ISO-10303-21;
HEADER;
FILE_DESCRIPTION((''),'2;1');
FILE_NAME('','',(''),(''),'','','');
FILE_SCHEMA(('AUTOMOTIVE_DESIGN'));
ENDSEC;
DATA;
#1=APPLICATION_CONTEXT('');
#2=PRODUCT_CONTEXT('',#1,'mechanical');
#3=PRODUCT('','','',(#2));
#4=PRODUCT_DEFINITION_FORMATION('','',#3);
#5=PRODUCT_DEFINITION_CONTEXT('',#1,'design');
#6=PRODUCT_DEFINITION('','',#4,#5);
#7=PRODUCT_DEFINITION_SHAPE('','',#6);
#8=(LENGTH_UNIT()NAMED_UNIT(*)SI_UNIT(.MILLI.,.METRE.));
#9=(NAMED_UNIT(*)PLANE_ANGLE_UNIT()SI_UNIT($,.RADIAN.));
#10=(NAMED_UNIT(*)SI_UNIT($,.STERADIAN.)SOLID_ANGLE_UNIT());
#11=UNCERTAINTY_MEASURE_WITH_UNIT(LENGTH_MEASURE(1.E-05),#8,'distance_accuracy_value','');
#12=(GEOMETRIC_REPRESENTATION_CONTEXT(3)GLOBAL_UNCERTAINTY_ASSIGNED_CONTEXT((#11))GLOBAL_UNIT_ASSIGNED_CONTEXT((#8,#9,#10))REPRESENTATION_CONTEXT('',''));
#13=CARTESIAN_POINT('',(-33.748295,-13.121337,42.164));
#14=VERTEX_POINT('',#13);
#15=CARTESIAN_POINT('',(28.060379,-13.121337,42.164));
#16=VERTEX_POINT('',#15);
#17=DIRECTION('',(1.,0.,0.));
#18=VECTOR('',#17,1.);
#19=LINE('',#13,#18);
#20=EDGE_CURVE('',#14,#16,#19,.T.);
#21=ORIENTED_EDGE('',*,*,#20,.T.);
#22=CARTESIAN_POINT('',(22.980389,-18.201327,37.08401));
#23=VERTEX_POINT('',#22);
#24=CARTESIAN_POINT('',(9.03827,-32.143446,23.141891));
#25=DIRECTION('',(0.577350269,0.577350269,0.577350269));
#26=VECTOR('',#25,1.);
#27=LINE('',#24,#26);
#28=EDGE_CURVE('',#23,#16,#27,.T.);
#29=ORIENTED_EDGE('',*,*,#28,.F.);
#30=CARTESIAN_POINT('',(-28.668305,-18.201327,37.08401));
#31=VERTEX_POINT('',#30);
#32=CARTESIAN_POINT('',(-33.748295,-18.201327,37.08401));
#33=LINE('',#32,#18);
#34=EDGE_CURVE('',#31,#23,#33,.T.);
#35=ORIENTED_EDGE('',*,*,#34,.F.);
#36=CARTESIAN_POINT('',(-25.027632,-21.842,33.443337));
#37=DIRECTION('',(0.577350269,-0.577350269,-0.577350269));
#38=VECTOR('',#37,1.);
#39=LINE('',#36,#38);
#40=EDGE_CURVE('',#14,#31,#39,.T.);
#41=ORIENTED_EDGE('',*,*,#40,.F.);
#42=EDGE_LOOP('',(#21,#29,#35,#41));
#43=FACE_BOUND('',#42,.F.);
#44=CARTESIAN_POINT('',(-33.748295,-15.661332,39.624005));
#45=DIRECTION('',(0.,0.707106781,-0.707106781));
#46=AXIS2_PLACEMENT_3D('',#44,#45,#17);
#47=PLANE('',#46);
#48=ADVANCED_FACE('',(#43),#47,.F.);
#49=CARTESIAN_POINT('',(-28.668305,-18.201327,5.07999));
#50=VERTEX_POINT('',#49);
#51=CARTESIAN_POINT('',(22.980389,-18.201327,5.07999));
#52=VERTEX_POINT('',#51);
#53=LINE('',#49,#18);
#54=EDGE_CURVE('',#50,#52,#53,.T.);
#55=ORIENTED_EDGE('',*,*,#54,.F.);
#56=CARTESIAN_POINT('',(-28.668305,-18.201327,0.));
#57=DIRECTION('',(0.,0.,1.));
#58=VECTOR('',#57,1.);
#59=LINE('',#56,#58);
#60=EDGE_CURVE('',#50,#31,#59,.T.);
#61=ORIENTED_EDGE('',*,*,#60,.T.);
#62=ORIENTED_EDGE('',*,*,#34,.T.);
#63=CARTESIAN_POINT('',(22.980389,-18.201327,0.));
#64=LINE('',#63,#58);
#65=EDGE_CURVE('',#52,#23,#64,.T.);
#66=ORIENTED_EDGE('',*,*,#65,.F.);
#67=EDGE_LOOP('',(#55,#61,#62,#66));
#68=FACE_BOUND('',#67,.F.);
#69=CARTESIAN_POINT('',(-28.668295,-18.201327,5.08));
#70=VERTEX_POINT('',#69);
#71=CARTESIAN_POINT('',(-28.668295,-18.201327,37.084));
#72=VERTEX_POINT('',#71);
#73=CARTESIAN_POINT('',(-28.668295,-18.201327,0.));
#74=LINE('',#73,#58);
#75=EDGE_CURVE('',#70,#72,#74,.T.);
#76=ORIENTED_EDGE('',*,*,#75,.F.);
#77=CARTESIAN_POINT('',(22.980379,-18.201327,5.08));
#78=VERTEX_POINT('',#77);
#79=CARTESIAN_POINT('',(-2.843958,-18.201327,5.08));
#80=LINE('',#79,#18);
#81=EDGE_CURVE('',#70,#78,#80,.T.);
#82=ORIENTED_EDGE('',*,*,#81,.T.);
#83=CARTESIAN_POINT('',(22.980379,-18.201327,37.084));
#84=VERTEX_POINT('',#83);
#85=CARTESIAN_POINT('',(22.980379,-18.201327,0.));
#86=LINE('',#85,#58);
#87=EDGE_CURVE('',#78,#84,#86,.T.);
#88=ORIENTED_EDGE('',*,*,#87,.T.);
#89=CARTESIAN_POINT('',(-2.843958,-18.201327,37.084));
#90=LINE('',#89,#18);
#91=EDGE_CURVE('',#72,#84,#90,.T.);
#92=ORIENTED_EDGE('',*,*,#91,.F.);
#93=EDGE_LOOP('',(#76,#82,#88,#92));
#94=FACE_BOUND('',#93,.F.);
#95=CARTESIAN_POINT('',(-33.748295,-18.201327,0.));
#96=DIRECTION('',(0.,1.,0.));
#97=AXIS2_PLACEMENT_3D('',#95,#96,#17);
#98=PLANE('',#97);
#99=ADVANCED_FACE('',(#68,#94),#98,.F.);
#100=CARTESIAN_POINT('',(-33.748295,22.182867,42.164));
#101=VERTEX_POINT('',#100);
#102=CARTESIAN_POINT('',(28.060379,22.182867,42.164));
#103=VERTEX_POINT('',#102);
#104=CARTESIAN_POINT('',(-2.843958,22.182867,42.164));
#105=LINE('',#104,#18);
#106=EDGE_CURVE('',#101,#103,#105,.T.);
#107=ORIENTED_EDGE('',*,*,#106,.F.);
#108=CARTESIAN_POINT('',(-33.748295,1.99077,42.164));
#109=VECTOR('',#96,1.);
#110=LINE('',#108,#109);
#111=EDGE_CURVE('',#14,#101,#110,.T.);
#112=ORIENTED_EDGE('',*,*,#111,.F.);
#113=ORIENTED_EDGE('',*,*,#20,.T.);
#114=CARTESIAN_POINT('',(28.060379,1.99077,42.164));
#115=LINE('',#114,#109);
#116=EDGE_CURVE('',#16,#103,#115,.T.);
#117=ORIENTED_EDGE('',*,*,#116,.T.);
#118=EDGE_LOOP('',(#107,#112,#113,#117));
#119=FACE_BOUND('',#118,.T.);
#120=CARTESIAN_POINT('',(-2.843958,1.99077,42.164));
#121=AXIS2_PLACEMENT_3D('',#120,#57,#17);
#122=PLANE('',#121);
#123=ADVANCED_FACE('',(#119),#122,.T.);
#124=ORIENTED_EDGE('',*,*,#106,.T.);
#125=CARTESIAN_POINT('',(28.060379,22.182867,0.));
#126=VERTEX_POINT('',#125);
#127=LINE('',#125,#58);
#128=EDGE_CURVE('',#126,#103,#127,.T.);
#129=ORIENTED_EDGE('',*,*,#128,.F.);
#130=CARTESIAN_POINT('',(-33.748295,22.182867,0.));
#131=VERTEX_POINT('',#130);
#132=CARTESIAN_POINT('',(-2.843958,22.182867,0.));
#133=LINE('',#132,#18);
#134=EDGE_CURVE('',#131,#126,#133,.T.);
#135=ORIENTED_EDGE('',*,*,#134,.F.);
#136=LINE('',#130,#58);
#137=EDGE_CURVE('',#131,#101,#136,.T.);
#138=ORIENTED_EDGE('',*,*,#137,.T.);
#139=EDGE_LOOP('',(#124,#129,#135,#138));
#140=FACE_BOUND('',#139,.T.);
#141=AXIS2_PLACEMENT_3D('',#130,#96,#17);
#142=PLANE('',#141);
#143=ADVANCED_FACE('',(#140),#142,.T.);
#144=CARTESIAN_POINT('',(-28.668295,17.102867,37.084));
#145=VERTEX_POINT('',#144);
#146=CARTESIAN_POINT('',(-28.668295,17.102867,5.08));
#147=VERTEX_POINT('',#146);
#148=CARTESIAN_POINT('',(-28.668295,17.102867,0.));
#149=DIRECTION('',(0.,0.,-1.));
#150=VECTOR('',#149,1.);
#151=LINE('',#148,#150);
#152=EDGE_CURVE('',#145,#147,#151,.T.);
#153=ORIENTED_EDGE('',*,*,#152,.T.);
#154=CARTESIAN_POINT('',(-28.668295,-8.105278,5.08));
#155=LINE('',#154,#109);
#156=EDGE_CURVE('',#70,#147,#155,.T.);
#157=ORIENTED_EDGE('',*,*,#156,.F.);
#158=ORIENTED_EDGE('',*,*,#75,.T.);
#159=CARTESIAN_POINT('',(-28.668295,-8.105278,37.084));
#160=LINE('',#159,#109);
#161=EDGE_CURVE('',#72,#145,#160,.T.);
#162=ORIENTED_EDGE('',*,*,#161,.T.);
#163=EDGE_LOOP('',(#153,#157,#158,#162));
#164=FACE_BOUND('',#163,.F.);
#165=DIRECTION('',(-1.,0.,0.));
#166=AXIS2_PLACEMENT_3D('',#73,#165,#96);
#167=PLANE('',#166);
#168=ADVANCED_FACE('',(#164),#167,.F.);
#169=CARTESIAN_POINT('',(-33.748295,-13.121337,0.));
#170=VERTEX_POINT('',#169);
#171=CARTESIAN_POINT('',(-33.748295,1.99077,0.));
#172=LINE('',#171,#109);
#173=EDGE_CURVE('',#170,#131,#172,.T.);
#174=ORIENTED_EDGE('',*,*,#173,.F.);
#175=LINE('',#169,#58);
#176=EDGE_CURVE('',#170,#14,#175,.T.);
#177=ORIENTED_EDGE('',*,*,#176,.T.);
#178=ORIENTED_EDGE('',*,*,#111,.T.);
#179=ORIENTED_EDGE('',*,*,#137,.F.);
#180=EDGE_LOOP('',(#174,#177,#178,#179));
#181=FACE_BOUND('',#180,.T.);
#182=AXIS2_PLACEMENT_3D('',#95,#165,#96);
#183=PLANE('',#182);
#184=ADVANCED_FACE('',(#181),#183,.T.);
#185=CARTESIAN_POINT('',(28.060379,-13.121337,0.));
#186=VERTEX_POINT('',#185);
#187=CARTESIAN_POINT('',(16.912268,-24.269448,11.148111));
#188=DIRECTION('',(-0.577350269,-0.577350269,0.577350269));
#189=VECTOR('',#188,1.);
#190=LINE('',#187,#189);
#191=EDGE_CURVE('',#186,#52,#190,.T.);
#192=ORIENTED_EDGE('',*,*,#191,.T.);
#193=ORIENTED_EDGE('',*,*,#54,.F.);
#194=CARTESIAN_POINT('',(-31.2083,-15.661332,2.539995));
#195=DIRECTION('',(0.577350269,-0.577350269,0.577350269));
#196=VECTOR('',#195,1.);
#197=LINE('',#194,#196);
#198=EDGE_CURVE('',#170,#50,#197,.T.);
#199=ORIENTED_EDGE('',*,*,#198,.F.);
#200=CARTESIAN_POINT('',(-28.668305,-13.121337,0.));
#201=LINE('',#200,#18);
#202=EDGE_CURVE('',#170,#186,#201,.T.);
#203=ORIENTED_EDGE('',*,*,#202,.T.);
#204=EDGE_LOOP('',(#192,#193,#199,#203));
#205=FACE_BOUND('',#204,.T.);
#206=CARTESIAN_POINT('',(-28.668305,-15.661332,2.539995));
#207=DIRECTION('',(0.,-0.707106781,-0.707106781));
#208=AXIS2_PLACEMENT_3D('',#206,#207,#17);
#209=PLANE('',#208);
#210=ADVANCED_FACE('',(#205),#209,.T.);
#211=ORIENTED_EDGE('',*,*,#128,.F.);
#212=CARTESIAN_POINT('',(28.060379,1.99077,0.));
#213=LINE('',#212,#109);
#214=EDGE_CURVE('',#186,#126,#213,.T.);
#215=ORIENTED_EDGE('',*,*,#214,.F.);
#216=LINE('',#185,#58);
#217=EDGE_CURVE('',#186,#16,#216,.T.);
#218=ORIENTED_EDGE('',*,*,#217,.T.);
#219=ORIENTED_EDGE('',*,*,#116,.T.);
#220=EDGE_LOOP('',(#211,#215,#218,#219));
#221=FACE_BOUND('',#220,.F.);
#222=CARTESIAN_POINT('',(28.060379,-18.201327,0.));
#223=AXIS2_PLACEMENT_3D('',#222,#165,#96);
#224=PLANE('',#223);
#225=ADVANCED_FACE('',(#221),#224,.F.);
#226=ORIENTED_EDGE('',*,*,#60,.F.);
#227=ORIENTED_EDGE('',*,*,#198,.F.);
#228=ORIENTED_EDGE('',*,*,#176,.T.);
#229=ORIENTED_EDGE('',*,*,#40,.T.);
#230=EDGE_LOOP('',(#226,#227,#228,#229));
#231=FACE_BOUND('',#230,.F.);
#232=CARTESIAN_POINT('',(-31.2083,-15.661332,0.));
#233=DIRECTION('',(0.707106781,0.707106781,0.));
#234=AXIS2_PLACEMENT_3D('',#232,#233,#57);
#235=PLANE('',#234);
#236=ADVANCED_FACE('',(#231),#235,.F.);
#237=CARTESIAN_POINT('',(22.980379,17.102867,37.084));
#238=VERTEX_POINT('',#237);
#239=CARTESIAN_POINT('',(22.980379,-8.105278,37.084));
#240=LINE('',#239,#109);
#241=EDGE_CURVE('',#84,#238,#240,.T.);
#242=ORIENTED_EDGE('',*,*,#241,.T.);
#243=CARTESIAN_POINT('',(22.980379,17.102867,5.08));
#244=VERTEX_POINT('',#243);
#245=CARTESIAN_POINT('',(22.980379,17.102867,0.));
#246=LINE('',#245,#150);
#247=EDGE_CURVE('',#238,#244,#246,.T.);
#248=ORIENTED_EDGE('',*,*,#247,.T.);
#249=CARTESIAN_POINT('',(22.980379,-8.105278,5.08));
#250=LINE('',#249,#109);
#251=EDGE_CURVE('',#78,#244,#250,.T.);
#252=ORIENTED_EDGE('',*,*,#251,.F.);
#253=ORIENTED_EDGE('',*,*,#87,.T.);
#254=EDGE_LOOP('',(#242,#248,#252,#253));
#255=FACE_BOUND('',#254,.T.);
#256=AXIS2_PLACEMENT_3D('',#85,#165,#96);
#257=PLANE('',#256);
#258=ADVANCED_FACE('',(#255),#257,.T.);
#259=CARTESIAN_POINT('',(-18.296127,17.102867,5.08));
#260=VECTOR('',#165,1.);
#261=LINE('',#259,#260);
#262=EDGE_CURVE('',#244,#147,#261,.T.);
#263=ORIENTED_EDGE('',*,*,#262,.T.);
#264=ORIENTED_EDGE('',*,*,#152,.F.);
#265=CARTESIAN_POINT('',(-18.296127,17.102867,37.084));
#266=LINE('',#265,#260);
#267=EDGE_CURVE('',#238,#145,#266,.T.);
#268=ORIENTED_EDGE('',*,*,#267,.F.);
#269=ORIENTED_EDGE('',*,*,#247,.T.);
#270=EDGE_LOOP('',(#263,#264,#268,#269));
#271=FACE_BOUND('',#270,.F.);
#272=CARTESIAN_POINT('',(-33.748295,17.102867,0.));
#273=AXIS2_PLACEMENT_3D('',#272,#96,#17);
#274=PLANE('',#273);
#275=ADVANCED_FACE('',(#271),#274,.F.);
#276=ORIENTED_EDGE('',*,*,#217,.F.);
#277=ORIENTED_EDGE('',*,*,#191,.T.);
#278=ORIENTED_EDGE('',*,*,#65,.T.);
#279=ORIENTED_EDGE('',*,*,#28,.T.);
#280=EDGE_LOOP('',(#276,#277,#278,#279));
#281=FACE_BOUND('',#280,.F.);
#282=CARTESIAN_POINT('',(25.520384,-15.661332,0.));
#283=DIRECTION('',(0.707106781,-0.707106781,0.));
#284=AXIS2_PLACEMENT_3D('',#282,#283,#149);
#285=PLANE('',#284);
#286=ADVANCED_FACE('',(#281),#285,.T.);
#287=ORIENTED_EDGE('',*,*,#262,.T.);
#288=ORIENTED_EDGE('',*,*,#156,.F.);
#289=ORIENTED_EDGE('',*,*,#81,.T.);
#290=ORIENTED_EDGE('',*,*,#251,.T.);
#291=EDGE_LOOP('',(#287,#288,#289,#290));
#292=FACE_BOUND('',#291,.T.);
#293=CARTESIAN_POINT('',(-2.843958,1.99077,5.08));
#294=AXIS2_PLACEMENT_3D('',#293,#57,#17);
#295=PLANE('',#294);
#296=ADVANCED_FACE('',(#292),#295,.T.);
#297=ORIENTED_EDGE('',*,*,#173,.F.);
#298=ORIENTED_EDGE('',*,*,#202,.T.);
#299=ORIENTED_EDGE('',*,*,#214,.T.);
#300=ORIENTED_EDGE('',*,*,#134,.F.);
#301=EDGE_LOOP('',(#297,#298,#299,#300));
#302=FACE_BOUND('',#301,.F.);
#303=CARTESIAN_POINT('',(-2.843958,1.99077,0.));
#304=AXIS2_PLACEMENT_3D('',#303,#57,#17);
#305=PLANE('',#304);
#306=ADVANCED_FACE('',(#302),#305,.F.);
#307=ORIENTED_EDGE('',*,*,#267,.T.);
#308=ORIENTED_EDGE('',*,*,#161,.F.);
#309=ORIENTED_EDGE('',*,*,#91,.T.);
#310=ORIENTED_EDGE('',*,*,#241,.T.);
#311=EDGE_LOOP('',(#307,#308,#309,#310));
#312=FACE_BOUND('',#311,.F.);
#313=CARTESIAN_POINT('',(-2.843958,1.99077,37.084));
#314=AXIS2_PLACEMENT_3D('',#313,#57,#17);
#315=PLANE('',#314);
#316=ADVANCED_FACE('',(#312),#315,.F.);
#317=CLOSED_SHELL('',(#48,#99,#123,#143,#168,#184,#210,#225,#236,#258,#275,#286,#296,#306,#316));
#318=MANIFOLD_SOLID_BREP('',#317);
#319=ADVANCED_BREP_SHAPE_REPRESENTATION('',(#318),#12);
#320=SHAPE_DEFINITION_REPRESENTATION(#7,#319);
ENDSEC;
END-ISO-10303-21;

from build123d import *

# Parameters (mm, degrees)
F0_W     = 61.8086736649
F0_H     = 40.3841938823
F1_DEPTH = 42.164
F2_T     = -5.08
F3_SIZE  = 5.07999
F4_SIZE  = 5.07999
F5_SIZE  = 5.07999


# Not quite as in the source:
# - a fillet or chamfer is up to 0.001 mm smaller than in the source, because OpenCascade refuses the exact size


with BuildPart() as f1:
    # F0 (on Top) → F1 (new body)
    with BuildSketch(Plane.XY):
        with Locations((-2.8439583257, 1.9907699898)):
            Rectangle(F0_W, F0_H)
    extrude(amount=F1_DEPTH)

    # F2
    f2_openings = [f1.faces().sort_by_distance(p)[0] for p in [
        (-2.843958, -18.201327, 21.082),
    ]]
    offset(amount=F2_T, openings=f2_openings)

    # F3 (size 5.08 in the source; OpenCascade refuses exactly that, so slightly less here)
    f3_edges = [f1.edges().sort_by_distance(p)[0] for p in [
        (-2.843958, -18.201327, 42.164),
    ]]
    chamfer(f3_edges, length=F3_SIZE)

    # F4 (size 5.08 in the source; OpenCascade refuses exactly that, so slightly less here)
    f4_edges = [f1.edges().sort_by_distance(p)[0] for p in [
        (-33.748295, -18.201327, 18.542005),
        (28.060379, -18.201327, 18.542005),
    ]]
    chamfer(f4_edges, length=F4_SIZE)

    # F5 (size 5.08 in the source; OpenCascade refuses exactly that, so slightly less here)
    f5_edges = [f1.edges().sort_by_distance(p)[0] for p in [
        (-2.843958, -18.201327, 0),
    ]]
    chamfer(f5_edges, length=F5_SIZE)


solid = f1.part
